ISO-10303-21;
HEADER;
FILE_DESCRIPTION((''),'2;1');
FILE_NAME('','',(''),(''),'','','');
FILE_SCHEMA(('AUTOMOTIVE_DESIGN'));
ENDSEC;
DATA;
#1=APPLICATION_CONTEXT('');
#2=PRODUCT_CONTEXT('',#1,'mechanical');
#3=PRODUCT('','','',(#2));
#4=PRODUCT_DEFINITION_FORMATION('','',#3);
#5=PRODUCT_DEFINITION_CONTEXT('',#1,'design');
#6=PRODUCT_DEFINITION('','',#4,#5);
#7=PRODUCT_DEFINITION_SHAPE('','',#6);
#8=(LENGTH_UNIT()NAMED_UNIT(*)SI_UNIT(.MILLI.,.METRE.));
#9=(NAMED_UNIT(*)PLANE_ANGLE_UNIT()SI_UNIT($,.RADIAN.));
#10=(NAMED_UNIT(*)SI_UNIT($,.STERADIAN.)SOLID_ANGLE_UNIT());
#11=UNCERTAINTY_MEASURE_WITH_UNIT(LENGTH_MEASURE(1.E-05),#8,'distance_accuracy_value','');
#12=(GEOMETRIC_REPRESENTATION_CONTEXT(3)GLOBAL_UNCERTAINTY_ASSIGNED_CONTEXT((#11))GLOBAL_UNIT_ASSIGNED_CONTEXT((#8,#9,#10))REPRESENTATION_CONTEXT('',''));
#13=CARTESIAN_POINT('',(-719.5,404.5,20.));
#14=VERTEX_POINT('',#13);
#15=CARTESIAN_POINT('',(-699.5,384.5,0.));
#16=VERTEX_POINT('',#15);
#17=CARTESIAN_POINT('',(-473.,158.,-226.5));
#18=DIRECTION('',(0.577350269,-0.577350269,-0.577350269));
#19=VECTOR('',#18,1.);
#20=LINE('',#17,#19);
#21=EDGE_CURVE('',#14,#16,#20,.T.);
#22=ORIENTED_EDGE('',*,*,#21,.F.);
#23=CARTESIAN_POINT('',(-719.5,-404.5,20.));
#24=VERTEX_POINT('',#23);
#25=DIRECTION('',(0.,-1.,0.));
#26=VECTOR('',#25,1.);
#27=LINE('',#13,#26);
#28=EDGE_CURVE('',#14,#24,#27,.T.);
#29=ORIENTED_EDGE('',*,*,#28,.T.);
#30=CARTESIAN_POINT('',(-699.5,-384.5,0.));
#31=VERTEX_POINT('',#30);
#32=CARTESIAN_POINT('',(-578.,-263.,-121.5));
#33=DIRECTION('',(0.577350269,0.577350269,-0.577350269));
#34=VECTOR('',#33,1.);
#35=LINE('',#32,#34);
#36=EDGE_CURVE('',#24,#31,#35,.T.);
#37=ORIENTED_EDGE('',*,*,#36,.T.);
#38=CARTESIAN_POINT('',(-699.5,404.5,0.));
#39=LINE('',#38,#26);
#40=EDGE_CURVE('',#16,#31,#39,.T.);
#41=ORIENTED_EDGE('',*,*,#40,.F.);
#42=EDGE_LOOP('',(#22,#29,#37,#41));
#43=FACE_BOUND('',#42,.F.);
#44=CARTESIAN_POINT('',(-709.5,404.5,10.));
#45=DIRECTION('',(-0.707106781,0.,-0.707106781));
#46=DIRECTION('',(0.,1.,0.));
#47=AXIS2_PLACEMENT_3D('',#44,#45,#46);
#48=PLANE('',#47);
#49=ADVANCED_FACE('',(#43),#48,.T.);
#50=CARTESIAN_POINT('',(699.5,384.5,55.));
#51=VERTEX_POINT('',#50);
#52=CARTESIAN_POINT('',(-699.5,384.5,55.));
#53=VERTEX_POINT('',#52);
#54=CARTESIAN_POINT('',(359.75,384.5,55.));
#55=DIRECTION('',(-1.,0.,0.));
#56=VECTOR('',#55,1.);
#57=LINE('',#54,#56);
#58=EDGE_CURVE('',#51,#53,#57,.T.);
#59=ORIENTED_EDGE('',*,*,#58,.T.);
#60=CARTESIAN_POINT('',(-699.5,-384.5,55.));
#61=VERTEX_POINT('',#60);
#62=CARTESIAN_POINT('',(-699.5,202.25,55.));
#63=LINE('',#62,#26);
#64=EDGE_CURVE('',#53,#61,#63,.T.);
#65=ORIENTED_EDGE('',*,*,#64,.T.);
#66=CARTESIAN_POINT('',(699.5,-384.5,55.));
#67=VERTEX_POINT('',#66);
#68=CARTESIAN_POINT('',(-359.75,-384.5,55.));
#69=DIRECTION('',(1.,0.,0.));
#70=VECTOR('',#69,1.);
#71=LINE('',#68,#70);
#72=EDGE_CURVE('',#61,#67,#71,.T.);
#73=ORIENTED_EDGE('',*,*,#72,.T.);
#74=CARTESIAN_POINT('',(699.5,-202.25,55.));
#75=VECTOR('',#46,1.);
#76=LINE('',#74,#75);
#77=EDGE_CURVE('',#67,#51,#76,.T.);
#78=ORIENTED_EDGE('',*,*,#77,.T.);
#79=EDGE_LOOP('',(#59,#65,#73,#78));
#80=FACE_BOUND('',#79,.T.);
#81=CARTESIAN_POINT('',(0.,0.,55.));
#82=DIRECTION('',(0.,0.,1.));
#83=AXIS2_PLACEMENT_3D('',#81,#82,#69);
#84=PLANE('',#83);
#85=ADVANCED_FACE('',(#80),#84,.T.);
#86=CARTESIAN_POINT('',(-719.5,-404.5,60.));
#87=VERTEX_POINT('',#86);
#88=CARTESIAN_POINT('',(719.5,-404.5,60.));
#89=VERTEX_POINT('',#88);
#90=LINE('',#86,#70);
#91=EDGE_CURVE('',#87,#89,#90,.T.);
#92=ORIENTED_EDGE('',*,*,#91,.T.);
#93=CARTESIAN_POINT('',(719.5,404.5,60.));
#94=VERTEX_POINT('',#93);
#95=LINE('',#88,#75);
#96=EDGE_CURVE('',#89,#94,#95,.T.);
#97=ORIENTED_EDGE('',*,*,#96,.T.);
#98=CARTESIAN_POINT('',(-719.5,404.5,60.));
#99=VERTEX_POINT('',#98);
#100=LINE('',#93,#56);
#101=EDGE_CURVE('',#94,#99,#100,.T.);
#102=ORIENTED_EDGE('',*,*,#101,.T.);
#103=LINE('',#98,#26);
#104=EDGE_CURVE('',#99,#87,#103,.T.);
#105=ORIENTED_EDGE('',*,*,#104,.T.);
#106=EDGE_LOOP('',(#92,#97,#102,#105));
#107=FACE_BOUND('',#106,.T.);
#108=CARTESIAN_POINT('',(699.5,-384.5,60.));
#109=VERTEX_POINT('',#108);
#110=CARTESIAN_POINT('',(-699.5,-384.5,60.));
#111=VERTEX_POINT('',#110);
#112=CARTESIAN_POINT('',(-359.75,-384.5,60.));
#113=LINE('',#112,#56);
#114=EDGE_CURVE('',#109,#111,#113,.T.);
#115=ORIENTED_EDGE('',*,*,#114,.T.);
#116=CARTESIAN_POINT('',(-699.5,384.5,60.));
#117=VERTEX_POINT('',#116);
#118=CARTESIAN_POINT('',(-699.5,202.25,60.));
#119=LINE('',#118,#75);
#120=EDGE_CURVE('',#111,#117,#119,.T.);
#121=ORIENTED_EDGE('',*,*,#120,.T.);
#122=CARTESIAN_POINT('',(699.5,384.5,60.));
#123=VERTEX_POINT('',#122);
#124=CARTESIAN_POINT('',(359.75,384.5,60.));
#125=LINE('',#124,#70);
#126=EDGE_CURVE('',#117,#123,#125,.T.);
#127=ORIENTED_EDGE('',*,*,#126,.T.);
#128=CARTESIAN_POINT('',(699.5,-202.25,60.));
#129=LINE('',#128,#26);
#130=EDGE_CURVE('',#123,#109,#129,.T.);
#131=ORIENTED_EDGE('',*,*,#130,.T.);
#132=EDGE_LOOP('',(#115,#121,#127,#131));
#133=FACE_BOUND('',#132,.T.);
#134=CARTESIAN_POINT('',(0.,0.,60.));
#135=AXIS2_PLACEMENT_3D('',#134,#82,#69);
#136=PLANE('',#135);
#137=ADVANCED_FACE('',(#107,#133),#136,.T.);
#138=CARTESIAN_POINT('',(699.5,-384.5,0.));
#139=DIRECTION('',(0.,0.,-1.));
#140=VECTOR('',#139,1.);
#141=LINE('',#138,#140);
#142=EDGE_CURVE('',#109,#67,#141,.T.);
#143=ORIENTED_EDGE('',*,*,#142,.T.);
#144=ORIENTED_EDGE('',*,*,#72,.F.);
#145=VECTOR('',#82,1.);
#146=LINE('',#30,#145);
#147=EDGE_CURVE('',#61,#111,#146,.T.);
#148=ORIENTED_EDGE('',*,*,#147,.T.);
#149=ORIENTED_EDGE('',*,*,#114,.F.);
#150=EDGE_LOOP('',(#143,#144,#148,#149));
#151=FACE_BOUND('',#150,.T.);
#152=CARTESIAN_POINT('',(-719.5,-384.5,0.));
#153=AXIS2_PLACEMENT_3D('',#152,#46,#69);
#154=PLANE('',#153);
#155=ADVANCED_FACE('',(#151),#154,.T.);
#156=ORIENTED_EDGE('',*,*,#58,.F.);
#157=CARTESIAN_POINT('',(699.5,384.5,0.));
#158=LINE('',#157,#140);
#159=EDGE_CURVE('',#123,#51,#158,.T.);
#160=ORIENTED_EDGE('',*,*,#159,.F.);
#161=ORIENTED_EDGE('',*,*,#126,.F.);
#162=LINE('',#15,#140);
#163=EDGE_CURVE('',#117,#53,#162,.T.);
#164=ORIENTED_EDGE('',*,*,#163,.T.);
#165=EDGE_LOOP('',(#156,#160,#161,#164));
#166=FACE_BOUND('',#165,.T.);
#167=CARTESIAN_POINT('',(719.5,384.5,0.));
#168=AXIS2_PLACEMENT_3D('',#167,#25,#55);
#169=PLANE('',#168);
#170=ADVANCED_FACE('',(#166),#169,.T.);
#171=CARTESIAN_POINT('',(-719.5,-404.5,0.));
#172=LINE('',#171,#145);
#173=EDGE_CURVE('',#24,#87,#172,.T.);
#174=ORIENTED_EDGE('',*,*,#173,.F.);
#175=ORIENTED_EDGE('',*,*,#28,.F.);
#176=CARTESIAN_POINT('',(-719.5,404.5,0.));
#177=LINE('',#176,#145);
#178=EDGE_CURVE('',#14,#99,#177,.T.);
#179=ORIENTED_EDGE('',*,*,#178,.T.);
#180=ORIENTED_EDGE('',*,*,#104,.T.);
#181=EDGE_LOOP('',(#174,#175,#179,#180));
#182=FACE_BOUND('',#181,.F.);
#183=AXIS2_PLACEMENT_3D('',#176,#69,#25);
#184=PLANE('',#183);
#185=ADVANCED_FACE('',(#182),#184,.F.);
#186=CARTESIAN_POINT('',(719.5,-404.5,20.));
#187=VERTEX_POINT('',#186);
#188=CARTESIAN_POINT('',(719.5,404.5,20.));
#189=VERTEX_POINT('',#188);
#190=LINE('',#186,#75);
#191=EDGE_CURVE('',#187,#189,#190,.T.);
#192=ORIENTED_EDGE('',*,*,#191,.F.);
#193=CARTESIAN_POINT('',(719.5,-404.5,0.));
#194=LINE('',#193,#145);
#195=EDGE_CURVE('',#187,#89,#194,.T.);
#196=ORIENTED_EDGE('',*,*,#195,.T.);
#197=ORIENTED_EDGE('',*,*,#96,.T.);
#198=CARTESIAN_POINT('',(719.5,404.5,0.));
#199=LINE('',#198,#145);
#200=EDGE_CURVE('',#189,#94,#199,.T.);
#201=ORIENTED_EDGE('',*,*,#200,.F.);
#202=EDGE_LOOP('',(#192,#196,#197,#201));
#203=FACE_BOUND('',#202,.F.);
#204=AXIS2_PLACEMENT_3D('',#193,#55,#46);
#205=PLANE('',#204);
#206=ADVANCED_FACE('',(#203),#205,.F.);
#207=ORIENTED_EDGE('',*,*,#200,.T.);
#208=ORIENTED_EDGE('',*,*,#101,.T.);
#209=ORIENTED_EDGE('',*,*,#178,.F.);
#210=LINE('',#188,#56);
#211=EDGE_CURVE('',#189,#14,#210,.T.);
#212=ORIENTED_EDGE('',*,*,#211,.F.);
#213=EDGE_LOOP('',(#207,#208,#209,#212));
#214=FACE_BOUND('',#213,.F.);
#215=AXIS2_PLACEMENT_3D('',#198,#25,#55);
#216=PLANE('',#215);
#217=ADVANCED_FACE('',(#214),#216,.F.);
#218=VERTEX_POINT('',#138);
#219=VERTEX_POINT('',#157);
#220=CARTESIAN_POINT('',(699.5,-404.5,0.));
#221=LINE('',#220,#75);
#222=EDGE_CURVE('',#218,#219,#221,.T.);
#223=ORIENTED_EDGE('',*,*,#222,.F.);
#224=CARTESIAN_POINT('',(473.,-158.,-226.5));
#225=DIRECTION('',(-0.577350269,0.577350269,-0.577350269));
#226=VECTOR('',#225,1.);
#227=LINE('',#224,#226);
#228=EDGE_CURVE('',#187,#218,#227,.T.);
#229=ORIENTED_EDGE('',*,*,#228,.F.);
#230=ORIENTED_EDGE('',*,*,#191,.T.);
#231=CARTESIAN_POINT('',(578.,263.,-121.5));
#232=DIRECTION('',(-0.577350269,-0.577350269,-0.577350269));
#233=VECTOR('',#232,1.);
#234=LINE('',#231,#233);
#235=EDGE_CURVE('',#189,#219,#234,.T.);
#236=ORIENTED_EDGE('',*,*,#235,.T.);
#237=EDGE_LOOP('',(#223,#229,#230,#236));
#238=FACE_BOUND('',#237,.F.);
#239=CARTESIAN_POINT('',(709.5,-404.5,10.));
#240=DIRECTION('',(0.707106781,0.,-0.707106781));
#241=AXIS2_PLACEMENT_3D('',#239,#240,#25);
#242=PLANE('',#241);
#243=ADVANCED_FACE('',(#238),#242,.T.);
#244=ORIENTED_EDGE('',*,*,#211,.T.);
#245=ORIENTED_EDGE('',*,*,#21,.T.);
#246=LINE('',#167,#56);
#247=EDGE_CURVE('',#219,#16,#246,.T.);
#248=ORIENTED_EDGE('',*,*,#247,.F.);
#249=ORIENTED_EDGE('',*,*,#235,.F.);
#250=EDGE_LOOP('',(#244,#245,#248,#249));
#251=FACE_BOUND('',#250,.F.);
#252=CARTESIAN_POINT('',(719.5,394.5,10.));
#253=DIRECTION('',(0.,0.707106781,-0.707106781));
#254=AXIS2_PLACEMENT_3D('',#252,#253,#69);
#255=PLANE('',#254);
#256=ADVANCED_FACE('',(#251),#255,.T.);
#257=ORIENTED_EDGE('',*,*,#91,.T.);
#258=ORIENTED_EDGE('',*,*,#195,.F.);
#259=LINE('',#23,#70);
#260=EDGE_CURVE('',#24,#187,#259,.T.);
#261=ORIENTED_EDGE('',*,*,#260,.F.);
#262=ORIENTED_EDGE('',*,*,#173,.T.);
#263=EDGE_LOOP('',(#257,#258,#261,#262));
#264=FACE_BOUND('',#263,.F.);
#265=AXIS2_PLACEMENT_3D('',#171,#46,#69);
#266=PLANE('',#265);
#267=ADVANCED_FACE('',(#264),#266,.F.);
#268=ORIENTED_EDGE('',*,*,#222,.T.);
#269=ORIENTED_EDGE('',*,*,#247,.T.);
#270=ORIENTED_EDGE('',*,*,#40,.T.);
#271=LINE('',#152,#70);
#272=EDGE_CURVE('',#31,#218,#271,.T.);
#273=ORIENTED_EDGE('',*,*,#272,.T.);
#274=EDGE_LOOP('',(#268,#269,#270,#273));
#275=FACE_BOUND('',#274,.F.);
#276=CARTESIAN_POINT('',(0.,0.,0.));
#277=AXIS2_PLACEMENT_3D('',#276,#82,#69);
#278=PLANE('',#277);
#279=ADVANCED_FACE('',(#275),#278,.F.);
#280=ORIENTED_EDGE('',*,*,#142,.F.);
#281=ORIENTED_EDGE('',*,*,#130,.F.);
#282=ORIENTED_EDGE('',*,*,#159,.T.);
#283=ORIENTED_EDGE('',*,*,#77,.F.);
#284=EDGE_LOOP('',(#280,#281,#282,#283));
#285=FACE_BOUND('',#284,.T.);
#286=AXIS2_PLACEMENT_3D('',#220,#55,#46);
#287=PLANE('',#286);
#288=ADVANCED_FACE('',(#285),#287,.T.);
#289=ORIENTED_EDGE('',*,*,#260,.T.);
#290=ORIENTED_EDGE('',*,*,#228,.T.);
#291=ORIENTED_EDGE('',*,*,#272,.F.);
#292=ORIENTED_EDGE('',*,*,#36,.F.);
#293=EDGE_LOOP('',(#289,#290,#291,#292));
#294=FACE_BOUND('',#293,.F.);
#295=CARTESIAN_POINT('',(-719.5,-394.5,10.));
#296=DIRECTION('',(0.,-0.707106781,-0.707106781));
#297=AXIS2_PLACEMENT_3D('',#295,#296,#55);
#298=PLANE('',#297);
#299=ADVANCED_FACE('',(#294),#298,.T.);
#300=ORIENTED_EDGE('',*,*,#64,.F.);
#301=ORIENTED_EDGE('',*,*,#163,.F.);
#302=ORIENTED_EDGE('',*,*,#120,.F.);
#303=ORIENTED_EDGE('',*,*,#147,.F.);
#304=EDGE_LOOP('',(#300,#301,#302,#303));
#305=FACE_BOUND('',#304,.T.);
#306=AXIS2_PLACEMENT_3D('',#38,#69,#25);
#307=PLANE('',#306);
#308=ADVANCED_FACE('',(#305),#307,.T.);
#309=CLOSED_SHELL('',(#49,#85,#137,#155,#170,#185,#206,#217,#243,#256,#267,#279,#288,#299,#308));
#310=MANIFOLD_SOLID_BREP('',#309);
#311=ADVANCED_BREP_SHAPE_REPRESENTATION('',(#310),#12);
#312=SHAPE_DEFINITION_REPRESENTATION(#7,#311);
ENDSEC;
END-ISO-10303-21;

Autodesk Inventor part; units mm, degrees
ref_plane "YZ Plane" through (0, 0, 0) normal (1, 0, 0) x (0, 1, 0)
ref_plane "XZ Plane" through (0, 0, 0) normal (0, 1, 0) x (-1, 0, 0)
ref_plane "XY Plane" through (0, 0, 0) normal (0, 0, 1) x (1, 0, 0)
sketch "Sketch1" plane through (0, 0, 0) normal (0, 0, 1) x (1, 0, 0)
  line L0 (-719.5, -404.5) -> (719.5, -404.5)
  line L1 (719.5, -404.5) -> (719.5, 404.5)
  line L2 (719.5, 404.5) -> (-719.5, 404.5)
  line L3 (-719.5, 404.5) -> (-719.5, -404.5)
  line L4 (-719.5, -404.5) -> (719.5, 404.5) construction
  line L5 (719.5, -404.5) -> (-719.5, 404.5) construction
  point P0 (0, 0)
  dimension "d0" = 1439
  dimension "d1" = 809
extrude "Extrusion1" add sketch "Sketch1" along normal blind 60
shell "Shell1" thickness 20 removed faces 1 at (-239.8333, 134.8333, 60) ; own thickness 55 on faces at (-239.8333, 134.8333, 0)
chamfer "Chamfer1" distance 20 angle 45 4 edges at (719.5, 0, 0) (0, 404.5, 0) (-719.5, 0, 0) (0, -404.5, 0)
properties part number "TV 65"
